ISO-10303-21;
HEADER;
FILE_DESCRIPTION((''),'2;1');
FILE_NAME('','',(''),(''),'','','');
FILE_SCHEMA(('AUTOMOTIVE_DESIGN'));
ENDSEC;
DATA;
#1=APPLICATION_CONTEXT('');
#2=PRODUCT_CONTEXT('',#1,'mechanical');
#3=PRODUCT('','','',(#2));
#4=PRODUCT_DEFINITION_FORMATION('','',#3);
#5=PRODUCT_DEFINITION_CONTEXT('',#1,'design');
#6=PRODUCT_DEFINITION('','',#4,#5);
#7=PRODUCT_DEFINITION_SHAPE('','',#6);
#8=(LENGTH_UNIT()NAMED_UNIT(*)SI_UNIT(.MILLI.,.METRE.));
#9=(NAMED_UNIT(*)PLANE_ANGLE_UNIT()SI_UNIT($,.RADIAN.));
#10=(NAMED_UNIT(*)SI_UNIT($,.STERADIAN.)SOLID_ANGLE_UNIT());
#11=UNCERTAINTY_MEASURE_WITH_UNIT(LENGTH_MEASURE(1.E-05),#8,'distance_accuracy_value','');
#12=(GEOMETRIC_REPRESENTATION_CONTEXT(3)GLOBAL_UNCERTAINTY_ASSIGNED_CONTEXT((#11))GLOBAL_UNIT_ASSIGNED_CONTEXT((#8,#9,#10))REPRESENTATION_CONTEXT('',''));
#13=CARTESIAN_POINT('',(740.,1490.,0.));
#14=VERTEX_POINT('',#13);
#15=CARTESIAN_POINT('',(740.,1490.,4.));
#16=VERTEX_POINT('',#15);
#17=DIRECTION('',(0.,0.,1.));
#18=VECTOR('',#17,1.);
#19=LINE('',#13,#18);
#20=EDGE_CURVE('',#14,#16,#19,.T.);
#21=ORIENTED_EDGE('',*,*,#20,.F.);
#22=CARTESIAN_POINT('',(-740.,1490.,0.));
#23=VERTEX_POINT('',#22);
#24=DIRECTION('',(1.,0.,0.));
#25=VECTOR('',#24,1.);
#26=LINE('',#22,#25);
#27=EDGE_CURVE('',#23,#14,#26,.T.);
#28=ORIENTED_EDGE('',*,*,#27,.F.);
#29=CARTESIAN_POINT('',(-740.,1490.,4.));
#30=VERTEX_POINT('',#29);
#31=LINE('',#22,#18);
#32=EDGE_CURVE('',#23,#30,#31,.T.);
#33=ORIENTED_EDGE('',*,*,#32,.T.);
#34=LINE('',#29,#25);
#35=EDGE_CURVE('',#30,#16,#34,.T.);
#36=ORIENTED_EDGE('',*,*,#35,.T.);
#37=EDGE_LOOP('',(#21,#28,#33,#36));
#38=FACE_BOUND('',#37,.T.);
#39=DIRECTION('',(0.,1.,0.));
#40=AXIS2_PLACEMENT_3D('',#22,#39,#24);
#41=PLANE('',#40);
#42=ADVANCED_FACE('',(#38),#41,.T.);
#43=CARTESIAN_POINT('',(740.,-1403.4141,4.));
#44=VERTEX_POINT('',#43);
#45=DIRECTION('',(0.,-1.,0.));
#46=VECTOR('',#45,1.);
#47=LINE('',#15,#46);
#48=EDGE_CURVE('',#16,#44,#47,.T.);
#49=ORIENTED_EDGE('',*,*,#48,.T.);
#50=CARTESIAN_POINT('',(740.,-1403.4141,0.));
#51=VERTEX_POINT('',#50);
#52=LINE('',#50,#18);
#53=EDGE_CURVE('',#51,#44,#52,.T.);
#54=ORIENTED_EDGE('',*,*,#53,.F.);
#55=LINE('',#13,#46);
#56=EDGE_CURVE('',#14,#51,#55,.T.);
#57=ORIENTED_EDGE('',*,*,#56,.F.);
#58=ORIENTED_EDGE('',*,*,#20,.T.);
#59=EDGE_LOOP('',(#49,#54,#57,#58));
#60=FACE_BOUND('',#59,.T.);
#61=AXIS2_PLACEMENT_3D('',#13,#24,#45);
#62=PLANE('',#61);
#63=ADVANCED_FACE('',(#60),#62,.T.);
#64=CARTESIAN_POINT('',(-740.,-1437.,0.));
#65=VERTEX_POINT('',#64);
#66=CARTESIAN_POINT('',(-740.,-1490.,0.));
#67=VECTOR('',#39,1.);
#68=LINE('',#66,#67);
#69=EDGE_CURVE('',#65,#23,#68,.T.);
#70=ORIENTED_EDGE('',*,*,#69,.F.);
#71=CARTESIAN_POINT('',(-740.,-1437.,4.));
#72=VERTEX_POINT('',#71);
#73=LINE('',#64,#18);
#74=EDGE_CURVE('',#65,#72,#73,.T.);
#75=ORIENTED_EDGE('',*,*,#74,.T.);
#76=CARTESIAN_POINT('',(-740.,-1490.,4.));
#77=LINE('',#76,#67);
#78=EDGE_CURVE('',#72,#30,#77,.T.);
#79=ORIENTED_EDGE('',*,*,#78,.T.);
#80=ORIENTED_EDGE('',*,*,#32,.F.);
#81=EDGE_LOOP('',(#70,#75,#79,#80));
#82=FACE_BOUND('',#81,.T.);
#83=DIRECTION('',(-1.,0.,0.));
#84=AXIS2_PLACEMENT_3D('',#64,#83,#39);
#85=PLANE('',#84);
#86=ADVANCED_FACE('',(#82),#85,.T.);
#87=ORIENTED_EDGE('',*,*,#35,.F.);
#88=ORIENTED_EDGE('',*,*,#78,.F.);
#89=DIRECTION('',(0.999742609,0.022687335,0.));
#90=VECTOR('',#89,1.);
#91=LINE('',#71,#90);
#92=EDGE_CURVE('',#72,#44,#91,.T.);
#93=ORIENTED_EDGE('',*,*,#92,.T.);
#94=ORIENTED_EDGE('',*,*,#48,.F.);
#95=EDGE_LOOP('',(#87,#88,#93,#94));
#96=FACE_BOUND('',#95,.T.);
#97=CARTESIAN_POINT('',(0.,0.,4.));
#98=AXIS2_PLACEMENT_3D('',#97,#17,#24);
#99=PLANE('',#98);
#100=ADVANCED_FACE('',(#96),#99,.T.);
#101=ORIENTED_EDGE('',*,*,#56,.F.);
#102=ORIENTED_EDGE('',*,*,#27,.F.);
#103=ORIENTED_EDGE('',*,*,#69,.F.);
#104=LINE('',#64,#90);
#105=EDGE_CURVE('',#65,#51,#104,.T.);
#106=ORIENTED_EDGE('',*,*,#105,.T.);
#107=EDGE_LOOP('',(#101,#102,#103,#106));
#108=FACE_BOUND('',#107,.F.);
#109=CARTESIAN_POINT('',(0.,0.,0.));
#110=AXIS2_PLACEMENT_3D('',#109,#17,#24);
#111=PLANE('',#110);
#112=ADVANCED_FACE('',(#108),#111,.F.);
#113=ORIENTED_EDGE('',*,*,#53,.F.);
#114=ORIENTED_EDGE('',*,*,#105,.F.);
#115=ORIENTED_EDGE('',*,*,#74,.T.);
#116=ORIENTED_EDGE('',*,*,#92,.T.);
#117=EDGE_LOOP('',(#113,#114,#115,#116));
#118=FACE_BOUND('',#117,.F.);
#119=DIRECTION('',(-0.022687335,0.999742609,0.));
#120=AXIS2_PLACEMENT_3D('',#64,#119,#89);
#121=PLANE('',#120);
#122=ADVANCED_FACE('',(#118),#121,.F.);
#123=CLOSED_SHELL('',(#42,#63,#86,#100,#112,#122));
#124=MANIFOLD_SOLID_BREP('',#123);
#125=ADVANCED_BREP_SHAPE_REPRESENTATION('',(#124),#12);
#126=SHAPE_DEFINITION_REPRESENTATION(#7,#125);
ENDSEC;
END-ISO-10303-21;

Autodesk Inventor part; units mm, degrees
ref_plane "YZ Plane" through (0, 0, 0) normal (1, 0, 0) x (0, 1, 0)
ref_plane "XZ Plane" through (0, 0, 0) normal (0, 1, 0) x (-1, 0, 0)
ref_plane "XY Plane" through (0, 0, 0) normal (0, 0, 1) x (1, 0, 0)
sketch "Sketch1" plane through (0, 0, 0) normal (0, 0, 1) x (1, 0, 0)
  line L0 (740, -1490) -> (-740, -1490)
  line L1 (-740, -1490) -> (-740, 1490)
  line L2 (-740, 1490) -> (740, 1490)
  line L3 (740, 1490) -> (740, -1490)
  line L4 (740, -1490) -> (-740, 1490) construction
  line L5 (-740, -1490) -> (740, 1490) construction
  line L6 (-740, -1437) -> (740, -1403.4141)
  point P0 (0, 0)
  dimension "d0" = 1480
  dimension "d1" = 2980
  dimension "d3" = 1.3
  dimension "d4" = 53
extrude "Plate1" add sketch "Sketch1" along normal blind 4 contours L6 L1 L2 L3
sketch "Эскиз2" plane through (0, 0, 4) normal (0, 0, 1) x (1, 0, 0)
  line L0 (-500.3754, 1312.2758) -> (-500.3754, 1810.412) construction
  line L1 (-500.3754, 1810.412) -> (-460.7482, 1810.412) construction
  line L2 (-460.7482, 1810.412) -> (-460.7482, 1312.2758) construction
  line L3 (-460.7482, 1312.2758) -> (-500.3754, 1312.2758) construction
  line L4 (-689.2413, 1238) -> (-689.2413, 1335) projected
  line L5 (-689.2413, 1335) -> (-685.2413, 1335) projected
  line L6 (-189.3681, 1238) -> (-189.3681, 1335) projected
  line L7 (-189.3681, 1335) -> (-185.3681, 1335) projected
  line L8 (310.5051, 1238) -> (310.5051, 1335) projected
  line L9 (310.5051, 1335) -> (314.5051, 1335) projected
  line L10 (-689.2413, -1460.5) -> (-689.2413, -1520.5) projected
  line L11 (-689.2413, -1460.5) -> (-685.2413, -1460.5) projected
  line L12 (-189.3681, -1460.5) -> (-189.3681, -1520.5) projected
  line L13 (-189.3681, -1460.5) -> (-185.3681, -1460.5) projected
  line L14 (310.5051, -1460.5) -> (310.5051, -1520.5) projected
  line L15 (310.5051, -1460.5) -> (314.5051, -1460.5) projected
  line L16 (-709.6246, 1234.5) -> (-769.6246, 1234.5) projected
  line L17 (-709.6246, 1234.5) -> (-709.6246, 1230.5) projected
  line L18 (-709.6246, 737.8333) -> (-769.6246, 737.8333) projected
  line L19 (-709.6246, 737.8333) -> (-709.6246, 733.8333) projected
  line L20 (-709.6246, 241.1667) -> (-769.6246, 241.1667) projected
  line L21 (-709.6246, 241.1667) -> (-709.6246, 237.1667) projected
  line L22 (-709.6246, -255.5) -> (-769.6246, -255.5) projected
  line L23 (-709.6246, -255.5) -> (-709.6246, -259.5) projected
  line L24 (-709.6246, -752.1667) -> (-769.6246, -752.1667) projected
  line L25 (-709.6246, -752.1667) -> (-709.6246, -756.1667) projected
  line L26 (-709.6246, -1248.8333) -> (-769.6246, -1248.8333) projected
  line L27 (-709.6246, -1248.8333) -> (-709.6246, -1252.8333) projected
  line L28 (740, 1234.5) -> (710, 1234.5) projected
  line L29 (710, 1234.5) -> (710, 1230.5) projected
  line L30 (740, 737.8333) -> (710, 737.8333) projected
  line L31 (710, 737.8333) -> (710, 733.8333) projected
  line L32 (740, 241.1667) -> (710, 241.1667) projected
  line L33 (710, 241.1667) -> (710, 237.1667) projected
  line L34 (740, -255.5) -> (710, -255.5) projected
  line L35 (710, -255.5) -> (710, -259.5) projected
  line L36 (740, -752.1667) -> (710, -752.1667) projected
  line L37 (710, -752.1667) -> (710, -756.1667) projected
  line L38 (740, -1248.8333) -> (710, -1248.8333) projected
  line L39 (710, -1248.8333) -> (710, -1252.8333) projected
  point P0 (0, 0)
mark "Маркировка1"
equation "\"d0\" = Лист_ширина"
equation "\"d2\" = Thickness"
equation "\"BendRadius\" = Thickness"
equation "\"BendReliefWidth\" = Thickness"
equation "\"BendReliefDepth\" = 0.5 * Thickness"
equation "\"CornerReliefSize\" = 4 * Thickness"
equation "\"MinimumRemnant\" = 2 * Thickness"
equation "\"TransitionRadius\" = BendRadius"
equation "\"JacobiRadiusSize\" = BendRadius"
equation "\"GapSize\" = Thickness"
equation "\"Лист_ширина\" = 1480"
equation "\"Thickness\" = 4"
properties part number "GBK 3236 shield 6" material "Steel"
